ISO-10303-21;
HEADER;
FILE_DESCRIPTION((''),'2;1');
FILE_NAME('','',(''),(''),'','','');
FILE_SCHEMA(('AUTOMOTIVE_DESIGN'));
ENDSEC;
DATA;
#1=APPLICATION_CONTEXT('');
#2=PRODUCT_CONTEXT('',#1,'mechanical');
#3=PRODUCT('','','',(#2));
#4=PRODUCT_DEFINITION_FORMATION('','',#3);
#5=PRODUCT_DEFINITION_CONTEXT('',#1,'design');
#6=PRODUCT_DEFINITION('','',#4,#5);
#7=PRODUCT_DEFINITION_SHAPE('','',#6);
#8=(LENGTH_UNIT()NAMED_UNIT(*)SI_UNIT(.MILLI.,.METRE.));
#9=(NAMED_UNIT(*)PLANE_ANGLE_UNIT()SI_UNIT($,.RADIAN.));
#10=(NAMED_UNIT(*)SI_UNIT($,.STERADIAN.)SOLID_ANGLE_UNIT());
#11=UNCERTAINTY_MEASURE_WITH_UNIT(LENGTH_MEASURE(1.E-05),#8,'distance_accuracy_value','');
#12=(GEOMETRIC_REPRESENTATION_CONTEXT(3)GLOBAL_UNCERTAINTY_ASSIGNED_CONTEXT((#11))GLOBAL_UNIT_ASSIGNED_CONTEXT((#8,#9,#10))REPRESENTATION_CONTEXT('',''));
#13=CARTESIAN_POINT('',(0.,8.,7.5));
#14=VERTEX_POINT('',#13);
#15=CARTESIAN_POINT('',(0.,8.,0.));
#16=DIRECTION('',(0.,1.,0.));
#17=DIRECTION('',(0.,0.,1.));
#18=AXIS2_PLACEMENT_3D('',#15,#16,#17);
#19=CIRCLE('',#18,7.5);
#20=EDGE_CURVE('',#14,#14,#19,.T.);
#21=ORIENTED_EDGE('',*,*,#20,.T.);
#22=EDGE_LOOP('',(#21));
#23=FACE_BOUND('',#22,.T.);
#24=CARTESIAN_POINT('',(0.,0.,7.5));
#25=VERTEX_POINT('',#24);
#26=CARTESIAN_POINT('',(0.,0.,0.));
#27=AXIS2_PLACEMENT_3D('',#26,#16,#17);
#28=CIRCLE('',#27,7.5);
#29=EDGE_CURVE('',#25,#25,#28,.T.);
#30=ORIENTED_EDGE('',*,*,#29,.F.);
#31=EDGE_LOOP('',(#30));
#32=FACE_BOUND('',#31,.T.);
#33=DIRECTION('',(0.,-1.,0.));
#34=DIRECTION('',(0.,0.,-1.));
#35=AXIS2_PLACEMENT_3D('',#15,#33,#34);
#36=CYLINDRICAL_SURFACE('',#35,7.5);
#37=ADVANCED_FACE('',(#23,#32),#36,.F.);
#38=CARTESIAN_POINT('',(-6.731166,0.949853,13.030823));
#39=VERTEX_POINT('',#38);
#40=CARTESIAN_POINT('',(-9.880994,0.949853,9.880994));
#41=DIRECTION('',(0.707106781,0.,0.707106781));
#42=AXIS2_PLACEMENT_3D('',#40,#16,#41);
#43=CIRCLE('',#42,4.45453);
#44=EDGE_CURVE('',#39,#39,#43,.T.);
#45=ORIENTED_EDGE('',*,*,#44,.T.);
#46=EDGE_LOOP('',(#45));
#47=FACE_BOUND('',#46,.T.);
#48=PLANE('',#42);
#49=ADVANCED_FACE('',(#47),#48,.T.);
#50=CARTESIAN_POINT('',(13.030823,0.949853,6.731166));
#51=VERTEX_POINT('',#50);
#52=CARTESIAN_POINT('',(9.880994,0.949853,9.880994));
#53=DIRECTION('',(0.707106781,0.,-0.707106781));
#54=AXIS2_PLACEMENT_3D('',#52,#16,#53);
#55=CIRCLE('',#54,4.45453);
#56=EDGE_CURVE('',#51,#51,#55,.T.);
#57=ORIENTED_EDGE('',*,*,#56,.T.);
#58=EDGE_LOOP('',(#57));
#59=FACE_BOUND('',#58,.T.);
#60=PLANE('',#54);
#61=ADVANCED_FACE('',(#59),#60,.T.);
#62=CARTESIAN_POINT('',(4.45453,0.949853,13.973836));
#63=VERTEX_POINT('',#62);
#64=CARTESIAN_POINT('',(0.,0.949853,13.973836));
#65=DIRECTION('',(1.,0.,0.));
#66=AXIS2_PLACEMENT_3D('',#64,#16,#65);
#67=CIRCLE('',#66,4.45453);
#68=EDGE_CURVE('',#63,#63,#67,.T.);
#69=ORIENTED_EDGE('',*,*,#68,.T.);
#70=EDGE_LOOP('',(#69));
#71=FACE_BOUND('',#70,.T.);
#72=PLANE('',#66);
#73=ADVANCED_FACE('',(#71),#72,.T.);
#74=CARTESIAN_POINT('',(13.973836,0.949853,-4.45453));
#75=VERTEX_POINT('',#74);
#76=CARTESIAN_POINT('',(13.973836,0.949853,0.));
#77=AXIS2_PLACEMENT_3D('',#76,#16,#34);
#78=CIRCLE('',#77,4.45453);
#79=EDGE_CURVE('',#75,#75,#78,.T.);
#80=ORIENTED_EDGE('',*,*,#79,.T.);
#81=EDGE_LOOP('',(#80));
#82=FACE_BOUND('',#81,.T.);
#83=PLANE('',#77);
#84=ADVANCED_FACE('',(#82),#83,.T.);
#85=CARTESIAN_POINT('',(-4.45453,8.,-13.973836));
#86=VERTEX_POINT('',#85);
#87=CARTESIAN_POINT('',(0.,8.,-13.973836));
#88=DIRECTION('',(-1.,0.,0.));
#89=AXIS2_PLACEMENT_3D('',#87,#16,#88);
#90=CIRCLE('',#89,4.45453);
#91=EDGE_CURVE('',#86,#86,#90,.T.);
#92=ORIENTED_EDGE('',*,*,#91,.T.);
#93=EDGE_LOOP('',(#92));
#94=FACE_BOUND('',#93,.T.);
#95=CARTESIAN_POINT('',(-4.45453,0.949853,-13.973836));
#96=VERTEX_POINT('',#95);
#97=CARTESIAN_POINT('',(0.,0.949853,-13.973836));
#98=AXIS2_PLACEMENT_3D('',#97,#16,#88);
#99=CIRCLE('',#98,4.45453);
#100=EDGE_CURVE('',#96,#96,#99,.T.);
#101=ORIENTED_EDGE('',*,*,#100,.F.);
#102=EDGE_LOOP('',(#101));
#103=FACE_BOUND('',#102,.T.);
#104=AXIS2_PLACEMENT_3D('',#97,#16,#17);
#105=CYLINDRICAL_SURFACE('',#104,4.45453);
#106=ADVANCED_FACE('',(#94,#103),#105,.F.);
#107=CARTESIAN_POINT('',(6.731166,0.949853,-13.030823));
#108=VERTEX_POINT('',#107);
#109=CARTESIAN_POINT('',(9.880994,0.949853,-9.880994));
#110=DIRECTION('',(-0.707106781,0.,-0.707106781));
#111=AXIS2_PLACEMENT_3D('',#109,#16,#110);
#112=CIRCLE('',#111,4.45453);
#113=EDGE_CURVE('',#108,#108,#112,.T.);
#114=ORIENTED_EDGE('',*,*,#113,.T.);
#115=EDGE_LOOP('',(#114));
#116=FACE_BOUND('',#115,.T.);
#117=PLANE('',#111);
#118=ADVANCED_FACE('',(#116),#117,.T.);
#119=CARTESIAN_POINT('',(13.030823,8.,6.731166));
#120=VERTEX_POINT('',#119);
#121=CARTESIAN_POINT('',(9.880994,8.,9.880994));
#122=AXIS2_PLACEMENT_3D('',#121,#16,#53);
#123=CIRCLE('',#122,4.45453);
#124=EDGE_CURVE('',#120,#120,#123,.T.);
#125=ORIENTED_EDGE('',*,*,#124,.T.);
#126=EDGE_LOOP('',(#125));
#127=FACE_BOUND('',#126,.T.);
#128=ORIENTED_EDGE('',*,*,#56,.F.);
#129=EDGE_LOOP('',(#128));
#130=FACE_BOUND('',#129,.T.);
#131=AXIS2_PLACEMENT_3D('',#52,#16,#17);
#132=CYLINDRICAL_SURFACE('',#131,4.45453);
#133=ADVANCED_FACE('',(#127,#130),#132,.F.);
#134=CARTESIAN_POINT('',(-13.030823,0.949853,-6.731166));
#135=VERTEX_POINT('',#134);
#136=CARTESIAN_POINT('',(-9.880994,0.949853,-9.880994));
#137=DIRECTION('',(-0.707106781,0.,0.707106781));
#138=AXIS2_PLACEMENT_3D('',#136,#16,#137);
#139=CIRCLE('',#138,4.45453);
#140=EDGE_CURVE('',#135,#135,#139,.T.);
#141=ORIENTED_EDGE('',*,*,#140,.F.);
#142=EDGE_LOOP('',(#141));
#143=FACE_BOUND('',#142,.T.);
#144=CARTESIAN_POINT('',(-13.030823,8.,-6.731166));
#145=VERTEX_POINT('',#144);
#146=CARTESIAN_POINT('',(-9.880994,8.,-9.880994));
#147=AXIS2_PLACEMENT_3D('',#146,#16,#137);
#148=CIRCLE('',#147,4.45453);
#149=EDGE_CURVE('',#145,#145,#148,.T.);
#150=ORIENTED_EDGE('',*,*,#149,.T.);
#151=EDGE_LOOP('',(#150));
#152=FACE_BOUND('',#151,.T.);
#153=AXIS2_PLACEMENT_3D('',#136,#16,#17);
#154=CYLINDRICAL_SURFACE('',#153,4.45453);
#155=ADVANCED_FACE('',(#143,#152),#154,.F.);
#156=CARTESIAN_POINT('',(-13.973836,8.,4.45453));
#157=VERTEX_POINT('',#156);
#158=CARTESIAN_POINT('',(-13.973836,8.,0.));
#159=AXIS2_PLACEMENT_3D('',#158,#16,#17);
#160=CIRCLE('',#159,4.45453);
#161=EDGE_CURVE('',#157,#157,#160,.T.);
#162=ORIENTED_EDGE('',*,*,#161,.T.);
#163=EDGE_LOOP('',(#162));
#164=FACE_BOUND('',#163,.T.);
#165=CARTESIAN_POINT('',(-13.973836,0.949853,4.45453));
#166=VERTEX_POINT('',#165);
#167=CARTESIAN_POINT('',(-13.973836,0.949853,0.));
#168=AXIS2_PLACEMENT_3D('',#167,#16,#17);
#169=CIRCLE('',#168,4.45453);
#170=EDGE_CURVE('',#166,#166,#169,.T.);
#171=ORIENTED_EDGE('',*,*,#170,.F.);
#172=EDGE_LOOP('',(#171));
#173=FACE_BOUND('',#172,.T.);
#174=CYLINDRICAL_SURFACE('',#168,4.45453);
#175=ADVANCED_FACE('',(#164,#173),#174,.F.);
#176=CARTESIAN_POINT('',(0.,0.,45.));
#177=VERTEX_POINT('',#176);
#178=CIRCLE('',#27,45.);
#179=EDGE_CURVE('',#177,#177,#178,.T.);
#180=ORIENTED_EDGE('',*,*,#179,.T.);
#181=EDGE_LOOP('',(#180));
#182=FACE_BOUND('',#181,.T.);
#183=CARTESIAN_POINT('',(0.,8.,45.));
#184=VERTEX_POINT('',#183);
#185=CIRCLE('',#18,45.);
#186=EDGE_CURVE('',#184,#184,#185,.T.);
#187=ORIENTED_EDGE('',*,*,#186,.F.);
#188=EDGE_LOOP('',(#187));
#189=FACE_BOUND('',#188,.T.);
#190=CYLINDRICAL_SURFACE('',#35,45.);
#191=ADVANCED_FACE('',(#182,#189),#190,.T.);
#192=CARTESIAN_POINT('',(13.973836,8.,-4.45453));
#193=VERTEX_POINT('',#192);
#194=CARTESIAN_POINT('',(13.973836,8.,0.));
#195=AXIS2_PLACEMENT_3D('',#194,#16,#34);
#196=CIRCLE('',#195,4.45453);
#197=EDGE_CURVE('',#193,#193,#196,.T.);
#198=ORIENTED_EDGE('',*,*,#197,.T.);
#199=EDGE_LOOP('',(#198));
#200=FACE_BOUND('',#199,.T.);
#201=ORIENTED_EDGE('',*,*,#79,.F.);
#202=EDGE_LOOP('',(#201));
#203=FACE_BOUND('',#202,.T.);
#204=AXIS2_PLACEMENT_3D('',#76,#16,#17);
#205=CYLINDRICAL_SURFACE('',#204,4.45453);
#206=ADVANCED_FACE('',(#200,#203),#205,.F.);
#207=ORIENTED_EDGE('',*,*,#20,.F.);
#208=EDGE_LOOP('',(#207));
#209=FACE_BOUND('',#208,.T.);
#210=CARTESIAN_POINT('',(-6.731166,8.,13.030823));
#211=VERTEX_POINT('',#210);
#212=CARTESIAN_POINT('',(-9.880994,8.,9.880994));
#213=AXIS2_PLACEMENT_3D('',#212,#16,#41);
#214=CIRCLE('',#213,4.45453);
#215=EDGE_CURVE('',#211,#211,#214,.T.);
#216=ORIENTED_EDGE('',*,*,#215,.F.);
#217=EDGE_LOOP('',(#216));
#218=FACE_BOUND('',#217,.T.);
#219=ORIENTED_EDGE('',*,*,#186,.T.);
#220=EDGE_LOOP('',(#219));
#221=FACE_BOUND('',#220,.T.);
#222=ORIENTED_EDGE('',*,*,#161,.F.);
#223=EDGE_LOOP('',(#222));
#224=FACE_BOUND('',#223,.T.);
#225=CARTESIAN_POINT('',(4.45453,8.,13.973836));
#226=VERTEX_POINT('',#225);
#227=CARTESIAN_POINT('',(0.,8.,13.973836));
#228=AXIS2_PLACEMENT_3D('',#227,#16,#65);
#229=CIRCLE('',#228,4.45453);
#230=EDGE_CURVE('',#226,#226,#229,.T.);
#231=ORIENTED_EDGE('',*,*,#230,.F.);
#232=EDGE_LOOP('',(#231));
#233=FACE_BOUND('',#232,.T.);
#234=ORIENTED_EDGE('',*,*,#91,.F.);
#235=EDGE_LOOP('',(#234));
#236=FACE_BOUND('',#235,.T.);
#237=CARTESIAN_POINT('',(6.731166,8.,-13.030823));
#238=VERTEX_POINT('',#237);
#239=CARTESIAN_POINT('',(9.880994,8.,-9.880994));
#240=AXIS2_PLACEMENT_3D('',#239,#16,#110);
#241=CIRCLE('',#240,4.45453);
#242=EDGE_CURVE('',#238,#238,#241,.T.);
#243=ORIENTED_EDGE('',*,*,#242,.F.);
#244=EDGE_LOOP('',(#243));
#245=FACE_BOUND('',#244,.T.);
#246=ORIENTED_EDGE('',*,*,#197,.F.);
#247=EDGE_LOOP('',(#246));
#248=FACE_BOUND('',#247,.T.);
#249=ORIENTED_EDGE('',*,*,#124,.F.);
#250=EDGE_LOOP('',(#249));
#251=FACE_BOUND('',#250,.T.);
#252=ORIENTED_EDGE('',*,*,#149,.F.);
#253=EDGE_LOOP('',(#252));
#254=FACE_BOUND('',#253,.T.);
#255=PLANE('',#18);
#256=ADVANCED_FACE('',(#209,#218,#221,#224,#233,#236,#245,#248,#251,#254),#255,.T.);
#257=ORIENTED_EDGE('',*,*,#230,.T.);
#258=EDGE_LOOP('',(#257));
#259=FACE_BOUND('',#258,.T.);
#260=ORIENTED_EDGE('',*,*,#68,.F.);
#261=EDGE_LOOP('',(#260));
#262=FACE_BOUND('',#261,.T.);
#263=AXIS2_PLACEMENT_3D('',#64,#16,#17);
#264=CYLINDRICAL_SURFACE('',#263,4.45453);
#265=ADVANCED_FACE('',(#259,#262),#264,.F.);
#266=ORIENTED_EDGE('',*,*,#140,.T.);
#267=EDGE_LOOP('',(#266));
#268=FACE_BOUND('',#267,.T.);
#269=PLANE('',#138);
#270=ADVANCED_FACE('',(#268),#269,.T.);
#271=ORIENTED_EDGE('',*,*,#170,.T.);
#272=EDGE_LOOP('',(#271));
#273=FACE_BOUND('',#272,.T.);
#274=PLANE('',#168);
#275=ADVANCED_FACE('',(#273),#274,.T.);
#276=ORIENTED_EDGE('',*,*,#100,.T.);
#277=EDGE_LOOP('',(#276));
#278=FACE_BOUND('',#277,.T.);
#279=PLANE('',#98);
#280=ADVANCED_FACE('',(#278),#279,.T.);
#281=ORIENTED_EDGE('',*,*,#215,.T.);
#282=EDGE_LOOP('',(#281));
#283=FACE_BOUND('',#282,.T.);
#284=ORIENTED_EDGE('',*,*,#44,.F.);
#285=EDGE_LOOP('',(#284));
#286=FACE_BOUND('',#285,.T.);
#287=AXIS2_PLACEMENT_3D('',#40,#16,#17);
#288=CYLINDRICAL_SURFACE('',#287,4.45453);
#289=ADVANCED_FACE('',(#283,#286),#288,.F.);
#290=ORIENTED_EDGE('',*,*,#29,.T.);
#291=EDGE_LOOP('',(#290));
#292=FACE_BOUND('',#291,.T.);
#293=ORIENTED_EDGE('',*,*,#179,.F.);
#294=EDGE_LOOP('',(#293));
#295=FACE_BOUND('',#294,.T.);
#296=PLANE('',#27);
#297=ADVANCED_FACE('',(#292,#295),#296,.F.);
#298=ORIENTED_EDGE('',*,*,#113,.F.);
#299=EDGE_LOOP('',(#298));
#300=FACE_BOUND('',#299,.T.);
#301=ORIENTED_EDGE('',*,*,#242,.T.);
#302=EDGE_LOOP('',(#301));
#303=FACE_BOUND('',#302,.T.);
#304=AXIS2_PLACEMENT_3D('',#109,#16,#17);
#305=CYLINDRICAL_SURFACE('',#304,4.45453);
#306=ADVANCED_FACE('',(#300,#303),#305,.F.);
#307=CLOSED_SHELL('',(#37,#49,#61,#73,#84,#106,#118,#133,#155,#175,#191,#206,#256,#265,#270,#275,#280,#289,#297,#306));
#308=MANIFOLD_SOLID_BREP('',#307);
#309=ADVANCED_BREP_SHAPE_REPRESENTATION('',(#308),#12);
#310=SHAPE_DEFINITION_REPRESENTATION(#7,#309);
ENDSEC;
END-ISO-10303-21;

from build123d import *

# Parameters (mm, degrees)
SKETCH1_R           = 45
BOSS_EXTRUDE1_DEPTH = 8
SKETCH2_R           = 7.5
CUT_EXTRUDE1_DEPTH  = 65.140470843
SKETCH3_R           = 4.454529992
CUT_EXTRUDE2_DEPTH  = 7.050147223
CIRPATTERN1_COUNT   = 8


with BuildPart() as part:
    # Sketch1 → Boss-Extrude1 (new body)
    with BuildSketch(Plane(origin=(0, 0, 0), x_dir=(1, 0, 0), z_dir=(0, 1, 0))):
        Circle(SKETCH1_R)
    extrude(amount=BOSS_EXTRUDE1_DEPTH)

    # Sketch2 → Cut-Extrude1 (cut, through all)
    with BuildSketch(Plane(origin=(0, 0, 0), x_dir=(1, 0, 0), z_dir=(0, 1, 0))):
        Circle(SKETCH2_R)
    extrude(amount=CUT_EXTRUDE1_DEPTH, mode=Mode.SUBTRACT)

    # Sketch3 → Cut-Extrude2 (cut)
    with BuildSketch(Plane(origin=(0, 8, 0), x_dir=(1, 0, 0), z_dir=(0, 1, 0))):
        with Locations((-13.973835942, 0)):
            Circle(SKETCH3_R)
    cut_extrude2 = extrude(amount=-CUT_EXTRUDE2_DEPTH, mode=Mode.SUBTRACT)

    # CirPattern1: Cut-Extrude2 ×8 about axis
    cirpattern1_axis = Axis((0, 0, 0), (0, 1, 0))
    for i in range(1, CIRPATTERN1_COUNT):
        add(cut_extrude2.rotate(cirpattern1_axis, i * 360 / CIRPATTERN1_COUNT), mode=Mode.SUBTRACT)


solid = part.part
